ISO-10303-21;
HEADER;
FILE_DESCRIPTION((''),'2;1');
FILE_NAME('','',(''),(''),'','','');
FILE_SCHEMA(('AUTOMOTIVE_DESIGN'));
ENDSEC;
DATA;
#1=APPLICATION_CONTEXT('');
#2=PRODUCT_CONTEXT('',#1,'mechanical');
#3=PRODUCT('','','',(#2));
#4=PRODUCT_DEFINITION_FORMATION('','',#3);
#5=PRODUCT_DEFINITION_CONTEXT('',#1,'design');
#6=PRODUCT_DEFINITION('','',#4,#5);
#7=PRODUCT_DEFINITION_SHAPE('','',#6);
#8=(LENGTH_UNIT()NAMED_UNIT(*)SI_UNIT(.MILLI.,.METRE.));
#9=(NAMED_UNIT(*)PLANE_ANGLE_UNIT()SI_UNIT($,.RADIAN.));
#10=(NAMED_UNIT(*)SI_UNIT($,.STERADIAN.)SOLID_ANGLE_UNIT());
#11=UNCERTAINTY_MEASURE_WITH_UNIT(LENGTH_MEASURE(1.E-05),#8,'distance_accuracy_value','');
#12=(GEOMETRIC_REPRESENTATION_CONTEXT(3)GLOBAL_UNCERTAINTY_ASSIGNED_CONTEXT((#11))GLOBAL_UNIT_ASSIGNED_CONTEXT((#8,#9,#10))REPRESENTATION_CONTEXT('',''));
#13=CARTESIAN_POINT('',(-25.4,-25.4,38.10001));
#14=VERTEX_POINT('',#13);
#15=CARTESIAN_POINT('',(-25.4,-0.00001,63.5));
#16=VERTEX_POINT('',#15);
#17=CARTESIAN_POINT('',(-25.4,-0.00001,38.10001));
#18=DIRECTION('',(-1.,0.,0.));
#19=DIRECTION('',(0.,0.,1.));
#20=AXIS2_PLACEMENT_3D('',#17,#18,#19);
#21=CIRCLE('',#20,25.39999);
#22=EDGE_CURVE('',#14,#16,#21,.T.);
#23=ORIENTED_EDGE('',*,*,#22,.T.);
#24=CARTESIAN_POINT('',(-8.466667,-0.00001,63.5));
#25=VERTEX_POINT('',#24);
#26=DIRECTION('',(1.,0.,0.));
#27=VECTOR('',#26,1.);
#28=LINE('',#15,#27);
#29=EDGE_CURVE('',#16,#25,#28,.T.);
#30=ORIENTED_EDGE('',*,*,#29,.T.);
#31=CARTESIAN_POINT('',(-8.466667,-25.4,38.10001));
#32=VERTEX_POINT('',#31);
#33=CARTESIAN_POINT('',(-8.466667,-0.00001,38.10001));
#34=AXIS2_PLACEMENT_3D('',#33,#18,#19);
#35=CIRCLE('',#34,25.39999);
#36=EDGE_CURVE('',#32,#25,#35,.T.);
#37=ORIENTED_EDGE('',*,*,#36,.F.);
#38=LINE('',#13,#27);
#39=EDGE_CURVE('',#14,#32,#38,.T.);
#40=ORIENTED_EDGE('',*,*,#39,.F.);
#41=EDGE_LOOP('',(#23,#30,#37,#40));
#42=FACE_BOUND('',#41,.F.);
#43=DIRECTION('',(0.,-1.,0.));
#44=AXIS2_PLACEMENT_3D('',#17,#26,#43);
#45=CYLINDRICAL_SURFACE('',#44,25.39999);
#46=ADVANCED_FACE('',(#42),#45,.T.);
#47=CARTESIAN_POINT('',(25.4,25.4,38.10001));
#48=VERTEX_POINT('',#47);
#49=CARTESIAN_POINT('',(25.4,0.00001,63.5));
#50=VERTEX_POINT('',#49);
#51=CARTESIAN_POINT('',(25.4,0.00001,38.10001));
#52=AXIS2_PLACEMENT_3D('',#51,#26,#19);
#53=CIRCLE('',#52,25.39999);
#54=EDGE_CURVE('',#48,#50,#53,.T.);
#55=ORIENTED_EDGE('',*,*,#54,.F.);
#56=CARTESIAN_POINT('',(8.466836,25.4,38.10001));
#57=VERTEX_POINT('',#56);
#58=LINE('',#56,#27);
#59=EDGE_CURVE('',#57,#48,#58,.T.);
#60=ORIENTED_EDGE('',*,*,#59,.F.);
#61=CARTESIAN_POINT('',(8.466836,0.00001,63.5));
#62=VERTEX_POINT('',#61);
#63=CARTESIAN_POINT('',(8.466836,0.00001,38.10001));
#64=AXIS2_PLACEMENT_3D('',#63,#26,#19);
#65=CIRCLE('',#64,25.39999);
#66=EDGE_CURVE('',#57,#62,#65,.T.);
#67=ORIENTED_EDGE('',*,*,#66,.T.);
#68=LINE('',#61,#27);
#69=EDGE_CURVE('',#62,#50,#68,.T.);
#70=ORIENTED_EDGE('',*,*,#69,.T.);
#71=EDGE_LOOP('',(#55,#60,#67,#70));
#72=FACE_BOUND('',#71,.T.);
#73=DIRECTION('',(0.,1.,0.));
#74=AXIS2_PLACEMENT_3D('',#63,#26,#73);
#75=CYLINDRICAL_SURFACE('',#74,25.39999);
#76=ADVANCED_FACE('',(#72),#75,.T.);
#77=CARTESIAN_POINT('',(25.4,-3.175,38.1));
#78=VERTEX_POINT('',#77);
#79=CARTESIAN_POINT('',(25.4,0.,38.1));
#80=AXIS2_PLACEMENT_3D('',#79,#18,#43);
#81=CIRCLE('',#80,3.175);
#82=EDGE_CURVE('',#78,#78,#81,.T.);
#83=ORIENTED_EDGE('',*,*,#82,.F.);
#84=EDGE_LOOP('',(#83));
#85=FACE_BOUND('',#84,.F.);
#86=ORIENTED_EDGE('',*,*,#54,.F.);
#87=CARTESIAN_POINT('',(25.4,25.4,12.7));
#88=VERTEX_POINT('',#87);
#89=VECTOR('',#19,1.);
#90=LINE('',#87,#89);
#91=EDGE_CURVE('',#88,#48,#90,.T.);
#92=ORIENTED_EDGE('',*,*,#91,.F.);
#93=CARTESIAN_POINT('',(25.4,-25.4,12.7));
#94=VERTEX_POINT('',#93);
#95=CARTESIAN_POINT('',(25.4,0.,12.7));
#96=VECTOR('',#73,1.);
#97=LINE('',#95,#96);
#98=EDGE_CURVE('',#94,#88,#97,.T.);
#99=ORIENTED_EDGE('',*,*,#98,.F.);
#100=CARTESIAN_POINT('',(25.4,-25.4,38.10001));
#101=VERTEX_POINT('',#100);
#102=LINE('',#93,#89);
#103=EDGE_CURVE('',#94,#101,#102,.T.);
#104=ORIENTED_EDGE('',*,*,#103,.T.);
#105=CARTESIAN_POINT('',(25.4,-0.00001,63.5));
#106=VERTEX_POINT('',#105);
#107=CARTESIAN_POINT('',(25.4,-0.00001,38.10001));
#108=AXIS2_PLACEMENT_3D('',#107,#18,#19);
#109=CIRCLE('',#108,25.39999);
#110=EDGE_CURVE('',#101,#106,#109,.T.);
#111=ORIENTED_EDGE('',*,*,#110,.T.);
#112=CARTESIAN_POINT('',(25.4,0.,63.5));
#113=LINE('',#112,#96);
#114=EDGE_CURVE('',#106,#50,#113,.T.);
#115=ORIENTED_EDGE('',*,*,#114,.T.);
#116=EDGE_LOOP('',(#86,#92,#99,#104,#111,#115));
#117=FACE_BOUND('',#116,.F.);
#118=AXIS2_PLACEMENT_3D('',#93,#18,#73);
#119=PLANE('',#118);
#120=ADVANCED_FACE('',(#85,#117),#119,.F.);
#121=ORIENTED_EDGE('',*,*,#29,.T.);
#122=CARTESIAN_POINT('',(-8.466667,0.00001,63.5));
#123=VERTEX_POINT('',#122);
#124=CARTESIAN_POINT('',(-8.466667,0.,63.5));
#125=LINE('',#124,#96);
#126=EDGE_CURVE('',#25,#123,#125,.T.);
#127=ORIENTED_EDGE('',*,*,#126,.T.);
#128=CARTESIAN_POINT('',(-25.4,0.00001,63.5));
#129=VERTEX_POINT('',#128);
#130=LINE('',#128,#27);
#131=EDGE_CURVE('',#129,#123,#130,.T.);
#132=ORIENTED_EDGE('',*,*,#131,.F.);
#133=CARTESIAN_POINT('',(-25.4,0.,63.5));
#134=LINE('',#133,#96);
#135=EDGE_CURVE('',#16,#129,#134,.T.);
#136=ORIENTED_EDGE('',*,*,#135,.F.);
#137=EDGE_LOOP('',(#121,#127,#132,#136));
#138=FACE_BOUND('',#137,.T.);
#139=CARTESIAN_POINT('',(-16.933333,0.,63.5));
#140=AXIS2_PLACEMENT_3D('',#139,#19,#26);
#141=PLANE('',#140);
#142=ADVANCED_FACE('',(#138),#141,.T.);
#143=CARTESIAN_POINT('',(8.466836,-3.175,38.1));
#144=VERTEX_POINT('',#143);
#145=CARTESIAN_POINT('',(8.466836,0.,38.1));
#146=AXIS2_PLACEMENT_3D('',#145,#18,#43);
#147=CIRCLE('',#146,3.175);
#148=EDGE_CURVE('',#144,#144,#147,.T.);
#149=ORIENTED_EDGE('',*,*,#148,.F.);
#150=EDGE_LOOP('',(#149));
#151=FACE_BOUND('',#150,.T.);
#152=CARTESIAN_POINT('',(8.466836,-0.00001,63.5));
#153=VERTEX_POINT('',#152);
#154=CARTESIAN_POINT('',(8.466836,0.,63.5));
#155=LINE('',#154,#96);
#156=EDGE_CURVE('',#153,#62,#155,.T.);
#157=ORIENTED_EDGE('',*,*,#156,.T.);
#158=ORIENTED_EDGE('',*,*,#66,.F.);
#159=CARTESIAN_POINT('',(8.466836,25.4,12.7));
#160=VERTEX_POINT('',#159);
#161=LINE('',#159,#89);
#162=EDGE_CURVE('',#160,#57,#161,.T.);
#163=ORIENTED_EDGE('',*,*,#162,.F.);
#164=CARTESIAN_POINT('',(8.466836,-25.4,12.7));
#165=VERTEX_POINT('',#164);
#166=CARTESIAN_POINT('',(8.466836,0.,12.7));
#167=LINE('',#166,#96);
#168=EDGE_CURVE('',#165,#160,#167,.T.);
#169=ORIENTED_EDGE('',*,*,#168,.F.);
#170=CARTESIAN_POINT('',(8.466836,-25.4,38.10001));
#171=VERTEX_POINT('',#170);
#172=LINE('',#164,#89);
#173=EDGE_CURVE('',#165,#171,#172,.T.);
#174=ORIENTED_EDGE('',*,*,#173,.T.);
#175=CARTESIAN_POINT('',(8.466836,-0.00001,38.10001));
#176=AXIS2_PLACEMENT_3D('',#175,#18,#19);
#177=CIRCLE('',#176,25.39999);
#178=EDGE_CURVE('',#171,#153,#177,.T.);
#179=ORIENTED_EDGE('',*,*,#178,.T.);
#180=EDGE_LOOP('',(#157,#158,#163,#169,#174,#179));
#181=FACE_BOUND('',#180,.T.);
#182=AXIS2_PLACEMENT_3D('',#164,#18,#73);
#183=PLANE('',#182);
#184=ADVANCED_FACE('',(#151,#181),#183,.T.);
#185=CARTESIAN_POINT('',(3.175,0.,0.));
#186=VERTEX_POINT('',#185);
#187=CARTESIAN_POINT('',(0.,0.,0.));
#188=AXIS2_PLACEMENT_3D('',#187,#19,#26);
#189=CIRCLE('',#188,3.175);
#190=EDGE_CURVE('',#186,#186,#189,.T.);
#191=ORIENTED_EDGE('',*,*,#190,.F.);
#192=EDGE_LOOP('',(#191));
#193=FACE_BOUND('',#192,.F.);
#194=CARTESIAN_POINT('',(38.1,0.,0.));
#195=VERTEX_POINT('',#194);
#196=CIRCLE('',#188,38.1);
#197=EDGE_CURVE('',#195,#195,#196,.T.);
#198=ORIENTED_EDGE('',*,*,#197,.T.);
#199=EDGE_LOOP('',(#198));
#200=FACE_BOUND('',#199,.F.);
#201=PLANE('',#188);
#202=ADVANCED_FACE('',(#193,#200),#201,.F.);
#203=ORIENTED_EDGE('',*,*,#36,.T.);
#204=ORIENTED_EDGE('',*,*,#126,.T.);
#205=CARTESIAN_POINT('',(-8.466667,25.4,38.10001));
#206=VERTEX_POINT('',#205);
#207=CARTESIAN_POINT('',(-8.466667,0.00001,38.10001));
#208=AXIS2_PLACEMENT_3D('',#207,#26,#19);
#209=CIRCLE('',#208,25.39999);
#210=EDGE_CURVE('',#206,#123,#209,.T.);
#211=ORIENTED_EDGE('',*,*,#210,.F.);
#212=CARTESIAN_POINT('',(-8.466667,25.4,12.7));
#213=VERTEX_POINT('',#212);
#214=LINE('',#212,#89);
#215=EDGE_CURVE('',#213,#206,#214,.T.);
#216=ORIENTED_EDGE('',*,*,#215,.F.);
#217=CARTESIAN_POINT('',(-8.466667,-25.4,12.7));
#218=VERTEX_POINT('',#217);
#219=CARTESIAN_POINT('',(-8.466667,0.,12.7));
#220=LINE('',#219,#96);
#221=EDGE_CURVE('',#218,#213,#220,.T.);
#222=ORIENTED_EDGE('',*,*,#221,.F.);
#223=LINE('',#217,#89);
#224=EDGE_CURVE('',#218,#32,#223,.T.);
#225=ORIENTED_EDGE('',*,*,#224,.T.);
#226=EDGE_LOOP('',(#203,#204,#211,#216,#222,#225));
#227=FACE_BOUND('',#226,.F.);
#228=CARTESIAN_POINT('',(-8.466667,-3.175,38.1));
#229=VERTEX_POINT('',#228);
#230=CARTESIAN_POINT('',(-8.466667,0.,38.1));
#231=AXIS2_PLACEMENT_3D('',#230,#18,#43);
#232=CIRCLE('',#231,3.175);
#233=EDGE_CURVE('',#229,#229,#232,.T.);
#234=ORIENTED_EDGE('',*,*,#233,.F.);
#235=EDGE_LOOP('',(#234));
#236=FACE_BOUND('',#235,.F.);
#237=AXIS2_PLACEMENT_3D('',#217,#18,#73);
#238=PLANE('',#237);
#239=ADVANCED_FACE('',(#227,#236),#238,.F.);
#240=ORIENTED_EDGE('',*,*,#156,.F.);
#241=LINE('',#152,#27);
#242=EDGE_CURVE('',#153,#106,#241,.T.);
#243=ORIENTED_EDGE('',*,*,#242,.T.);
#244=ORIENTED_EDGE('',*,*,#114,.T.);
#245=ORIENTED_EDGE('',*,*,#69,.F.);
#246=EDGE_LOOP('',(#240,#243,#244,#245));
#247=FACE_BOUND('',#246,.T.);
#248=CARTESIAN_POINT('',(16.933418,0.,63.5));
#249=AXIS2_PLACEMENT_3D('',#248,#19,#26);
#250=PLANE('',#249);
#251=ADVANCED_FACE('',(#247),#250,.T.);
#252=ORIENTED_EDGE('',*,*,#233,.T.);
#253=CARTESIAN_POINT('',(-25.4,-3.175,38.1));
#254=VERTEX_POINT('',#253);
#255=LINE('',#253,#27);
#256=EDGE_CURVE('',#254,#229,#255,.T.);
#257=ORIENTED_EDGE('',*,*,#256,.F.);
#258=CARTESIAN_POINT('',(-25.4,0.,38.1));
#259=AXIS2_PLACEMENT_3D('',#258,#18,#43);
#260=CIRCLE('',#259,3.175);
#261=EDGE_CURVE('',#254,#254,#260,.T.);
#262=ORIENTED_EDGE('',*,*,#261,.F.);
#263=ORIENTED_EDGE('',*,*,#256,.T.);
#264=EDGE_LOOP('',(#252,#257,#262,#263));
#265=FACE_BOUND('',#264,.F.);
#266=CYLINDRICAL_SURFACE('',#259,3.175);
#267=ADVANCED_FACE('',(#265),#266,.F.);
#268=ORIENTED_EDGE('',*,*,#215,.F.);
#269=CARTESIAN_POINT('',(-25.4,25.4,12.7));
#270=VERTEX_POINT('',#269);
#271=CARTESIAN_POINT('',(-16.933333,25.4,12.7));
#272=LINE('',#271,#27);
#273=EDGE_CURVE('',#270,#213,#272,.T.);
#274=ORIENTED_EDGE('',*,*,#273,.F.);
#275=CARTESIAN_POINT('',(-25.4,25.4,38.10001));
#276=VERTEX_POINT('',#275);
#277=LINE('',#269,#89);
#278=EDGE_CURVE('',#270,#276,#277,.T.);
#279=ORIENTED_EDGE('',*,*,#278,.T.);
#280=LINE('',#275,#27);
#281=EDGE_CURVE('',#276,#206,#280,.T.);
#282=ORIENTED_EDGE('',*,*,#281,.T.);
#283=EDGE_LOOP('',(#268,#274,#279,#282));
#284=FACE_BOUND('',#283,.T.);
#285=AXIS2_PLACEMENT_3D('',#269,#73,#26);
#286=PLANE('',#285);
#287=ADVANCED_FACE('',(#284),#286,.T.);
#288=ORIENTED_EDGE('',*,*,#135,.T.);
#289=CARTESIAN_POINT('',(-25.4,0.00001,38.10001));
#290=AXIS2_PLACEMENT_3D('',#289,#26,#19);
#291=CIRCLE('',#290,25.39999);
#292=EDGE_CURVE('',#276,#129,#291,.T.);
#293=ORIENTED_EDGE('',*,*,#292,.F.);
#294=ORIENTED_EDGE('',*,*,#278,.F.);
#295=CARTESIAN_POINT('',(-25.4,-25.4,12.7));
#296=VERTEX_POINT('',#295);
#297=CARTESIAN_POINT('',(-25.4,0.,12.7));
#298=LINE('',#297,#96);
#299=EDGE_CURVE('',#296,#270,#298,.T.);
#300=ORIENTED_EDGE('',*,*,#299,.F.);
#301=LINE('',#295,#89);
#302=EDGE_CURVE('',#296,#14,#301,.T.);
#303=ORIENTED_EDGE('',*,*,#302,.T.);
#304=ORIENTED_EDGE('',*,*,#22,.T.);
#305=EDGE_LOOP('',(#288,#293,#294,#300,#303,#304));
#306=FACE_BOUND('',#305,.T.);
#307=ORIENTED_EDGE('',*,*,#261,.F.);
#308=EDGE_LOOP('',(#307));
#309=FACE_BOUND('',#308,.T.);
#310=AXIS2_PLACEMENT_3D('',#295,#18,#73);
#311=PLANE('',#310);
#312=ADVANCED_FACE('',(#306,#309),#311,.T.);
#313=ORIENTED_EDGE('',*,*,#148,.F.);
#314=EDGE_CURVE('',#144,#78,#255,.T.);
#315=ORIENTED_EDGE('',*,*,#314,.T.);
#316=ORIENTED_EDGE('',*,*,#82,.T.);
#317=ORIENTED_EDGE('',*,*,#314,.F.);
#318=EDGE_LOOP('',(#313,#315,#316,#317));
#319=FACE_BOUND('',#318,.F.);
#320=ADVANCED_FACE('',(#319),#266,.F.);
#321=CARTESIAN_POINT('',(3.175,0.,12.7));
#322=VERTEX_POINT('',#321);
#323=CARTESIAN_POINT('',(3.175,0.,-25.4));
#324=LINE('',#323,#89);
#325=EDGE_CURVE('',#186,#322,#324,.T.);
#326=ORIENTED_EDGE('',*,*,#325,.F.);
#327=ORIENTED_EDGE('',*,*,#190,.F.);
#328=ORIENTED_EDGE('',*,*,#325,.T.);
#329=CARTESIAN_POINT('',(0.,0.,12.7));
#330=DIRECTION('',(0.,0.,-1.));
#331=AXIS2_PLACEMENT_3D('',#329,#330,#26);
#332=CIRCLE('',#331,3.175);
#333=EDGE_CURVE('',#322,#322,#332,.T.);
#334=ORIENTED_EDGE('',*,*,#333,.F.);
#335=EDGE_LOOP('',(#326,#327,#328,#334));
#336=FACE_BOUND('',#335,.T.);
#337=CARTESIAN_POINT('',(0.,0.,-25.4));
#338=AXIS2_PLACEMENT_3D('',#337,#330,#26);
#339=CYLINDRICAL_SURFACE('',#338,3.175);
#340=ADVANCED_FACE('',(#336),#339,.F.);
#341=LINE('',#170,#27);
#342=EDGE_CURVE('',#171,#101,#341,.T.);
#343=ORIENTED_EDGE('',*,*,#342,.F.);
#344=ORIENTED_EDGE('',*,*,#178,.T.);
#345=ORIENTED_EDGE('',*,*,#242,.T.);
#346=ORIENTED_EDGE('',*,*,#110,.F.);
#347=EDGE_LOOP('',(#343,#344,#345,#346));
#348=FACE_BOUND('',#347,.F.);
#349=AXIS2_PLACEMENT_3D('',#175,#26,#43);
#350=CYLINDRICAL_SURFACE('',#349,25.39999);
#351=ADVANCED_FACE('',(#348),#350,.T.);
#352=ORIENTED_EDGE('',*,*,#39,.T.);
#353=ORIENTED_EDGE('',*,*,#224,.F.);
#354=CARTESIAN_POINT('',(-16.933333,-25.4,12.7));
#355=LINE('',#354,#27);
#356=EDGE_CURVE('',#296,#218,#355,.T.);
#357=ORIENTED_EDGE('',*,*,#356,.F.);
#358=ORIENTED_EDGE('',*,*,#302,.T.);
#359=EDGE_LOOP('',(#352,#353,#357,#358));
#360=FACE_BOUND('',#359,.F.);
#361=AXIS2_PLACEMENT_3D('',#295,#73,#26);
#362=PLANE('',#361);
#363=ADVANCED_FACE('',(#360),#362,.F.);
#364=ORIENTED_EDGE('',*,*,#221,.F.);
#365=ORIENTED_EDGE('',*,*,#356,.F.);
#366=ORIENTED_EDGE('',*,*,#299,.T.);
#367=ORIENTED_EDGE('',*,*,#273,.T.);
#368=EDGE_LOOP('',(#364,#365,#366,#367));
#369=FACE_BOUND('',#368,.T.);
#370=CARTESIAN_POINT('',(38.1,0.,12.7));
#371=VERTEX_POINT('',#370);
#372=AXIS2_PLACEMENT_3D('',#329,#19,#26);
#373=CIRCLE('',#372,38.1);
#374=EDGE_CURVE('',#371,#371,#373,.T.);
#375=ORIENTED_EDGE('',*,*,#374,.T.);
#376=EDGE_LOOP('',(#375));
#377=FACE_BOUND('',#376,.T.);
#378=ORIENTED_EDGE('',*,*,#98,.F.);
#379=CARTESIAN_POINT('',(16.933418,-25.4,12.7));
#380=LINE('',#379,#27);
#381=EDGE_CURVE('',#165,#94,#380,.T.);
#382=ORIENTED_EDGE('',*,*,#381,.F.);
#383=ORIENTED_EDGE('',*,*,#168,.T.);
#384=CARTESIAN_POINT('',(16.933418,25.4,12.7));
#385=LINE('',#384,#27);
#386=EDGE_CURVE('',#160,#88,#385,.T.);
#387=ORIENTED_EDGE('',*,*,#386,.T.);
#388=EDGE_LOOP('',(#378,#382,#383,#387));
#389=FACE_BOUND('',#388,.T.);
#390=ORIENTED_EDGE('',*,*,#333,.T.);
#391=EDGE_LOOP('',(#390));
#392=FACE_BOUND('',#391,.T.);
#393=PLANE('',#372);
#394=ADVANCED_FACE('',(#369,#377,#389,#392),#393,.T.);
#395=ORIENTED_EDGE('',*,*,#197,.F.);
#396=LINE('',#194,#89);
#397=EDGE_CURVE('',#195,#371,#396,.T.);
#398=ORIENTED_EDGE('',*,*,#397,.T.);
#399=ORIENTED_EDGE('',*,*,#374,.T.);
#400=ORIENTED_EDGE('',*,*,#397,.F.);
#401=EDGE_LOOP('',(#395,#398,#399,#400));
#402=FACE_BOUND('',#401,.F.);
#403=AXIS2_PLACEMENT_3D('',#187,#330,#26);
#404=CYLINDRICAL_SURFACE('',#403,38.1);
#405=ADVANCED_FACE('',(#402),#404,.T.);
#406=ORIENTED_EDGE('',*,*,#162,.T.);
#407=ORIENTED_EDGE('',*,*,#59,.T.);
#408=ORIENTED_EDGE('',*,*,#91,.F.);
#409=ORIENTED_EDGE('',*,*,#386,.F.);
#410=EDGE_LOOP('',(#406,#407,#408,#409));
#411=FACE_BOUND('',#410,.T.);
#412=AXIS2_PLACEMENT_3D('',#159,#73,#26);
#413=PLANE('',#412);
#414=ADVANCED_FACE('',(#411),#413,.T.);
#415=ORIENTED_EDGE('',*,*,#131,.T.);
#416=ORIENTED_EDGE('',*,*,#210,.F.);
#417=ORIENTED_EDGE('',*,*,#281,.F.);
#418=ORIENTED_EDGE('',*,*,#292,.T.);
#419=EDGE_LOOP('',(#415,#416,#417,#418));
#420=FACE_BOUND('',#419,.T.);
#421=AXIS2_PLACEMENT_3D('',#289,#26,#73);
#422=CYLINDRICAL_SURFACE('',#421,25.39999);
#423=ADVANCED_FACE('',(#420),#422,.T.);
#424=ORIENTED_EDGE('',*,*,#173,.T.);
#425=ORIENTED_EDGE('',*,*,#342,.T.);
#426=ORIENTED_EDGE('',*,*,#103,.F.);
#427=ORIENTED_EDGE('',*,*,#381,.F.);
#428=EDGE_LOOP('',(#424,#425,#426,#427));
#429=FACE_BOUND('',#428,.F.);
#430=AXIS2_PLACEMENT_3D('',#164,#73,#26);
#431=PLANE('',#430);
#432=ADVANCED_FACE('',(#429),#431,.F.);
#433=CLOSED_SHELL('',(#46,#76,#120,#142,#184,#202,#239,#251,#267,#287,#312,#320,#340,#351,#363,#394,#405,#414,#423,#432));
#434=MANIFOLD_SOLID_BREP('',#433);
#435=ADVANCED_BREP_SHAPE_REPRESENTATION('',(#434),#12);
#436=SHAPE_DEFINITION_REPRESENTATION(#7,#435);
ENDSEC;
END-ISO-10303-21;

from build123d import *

# Parameters (mm, degrees)
F0_R     = 3.175
F1_DEPTH = 25.4
F0_R_2   = 38.1
F2_DEPTH = 12.7
F3_W     = 16.933164
F3_H     = 50.8
F3_W_2   = 16.933333164
F4_DEPTH = 50.8
F5_R     = 25.39999
F6_R     = 3.175
F7_DEPTH = 103.2441
F8_DEPTH = 120.64677


# Not quite as in the source:
# - a fillet or chamfer is up to 0.001 mm smaller than in the source, because OpenCascade refuses the exact size


with BuildPart() as f1:
    # F0 (on Top) → F1 (new body)
    with BuildSketch(Plane.XY):
        Circle(F0_R)
    extrude(amount=-F1_DEPTH)

    # F0 (on Top) → F2 (join)
    with BuildSketch(Plane.XY):
        Circle(F0_R_2)
        Circle(F0_R, mode=Mode.SUBTRACT)
        Circle(F0_R)
    extrude(amount=F2_DEPTH)

    # F3 (on face) → F4 (join)
    with BuildSketch(Plane.XY.offset(12.7)):
        with Locations((16.933418, 0)):
            Rectangle(F3_W, F3_H)
        with Locations((-16.933333418, 0)):
            Rectangle(F3_W_2, F3_H)
    extrude(amount=F4_DEPTH)

    # F5 (radius 25.4 in the source; OpenCascade refuses exactly that, so slightly less here)
    f5_edges = [f1.edges().sort_by_distance(p)[0] for p in [
        (16.933418, -25.4, 63.5),
        (16.933418, 25.4, 63.5),
        (-16.933333, 25.4, 63.5),
        (-16.933333, -25.4, 63.5),
    ]]
    fillet(f5_edges, radius=F5_R)

    # F6 (on face) → F7 (cut)
    with BuildSketch(Plane(origin=(-25.4, 0, 0), x_dir=(0, -1, 0), z_dir=(-1, 0, 0))):
        with Locations((0, 38.1)):
            Circle(F6_R)
    extrude(amount=-F7_DEPTH, mode=Mode.SUBTRACT)

    # F8 (cut): a face of the model
    f8_faces = [f1.faces().sort_by_distance(p)[0] for p in [
        (0, 0, -25.4),
    ]]
    extrude(f8_faces, amount=-F8_DEPTH, mode=Mode.SUBTRACT)


solid = f1.part
